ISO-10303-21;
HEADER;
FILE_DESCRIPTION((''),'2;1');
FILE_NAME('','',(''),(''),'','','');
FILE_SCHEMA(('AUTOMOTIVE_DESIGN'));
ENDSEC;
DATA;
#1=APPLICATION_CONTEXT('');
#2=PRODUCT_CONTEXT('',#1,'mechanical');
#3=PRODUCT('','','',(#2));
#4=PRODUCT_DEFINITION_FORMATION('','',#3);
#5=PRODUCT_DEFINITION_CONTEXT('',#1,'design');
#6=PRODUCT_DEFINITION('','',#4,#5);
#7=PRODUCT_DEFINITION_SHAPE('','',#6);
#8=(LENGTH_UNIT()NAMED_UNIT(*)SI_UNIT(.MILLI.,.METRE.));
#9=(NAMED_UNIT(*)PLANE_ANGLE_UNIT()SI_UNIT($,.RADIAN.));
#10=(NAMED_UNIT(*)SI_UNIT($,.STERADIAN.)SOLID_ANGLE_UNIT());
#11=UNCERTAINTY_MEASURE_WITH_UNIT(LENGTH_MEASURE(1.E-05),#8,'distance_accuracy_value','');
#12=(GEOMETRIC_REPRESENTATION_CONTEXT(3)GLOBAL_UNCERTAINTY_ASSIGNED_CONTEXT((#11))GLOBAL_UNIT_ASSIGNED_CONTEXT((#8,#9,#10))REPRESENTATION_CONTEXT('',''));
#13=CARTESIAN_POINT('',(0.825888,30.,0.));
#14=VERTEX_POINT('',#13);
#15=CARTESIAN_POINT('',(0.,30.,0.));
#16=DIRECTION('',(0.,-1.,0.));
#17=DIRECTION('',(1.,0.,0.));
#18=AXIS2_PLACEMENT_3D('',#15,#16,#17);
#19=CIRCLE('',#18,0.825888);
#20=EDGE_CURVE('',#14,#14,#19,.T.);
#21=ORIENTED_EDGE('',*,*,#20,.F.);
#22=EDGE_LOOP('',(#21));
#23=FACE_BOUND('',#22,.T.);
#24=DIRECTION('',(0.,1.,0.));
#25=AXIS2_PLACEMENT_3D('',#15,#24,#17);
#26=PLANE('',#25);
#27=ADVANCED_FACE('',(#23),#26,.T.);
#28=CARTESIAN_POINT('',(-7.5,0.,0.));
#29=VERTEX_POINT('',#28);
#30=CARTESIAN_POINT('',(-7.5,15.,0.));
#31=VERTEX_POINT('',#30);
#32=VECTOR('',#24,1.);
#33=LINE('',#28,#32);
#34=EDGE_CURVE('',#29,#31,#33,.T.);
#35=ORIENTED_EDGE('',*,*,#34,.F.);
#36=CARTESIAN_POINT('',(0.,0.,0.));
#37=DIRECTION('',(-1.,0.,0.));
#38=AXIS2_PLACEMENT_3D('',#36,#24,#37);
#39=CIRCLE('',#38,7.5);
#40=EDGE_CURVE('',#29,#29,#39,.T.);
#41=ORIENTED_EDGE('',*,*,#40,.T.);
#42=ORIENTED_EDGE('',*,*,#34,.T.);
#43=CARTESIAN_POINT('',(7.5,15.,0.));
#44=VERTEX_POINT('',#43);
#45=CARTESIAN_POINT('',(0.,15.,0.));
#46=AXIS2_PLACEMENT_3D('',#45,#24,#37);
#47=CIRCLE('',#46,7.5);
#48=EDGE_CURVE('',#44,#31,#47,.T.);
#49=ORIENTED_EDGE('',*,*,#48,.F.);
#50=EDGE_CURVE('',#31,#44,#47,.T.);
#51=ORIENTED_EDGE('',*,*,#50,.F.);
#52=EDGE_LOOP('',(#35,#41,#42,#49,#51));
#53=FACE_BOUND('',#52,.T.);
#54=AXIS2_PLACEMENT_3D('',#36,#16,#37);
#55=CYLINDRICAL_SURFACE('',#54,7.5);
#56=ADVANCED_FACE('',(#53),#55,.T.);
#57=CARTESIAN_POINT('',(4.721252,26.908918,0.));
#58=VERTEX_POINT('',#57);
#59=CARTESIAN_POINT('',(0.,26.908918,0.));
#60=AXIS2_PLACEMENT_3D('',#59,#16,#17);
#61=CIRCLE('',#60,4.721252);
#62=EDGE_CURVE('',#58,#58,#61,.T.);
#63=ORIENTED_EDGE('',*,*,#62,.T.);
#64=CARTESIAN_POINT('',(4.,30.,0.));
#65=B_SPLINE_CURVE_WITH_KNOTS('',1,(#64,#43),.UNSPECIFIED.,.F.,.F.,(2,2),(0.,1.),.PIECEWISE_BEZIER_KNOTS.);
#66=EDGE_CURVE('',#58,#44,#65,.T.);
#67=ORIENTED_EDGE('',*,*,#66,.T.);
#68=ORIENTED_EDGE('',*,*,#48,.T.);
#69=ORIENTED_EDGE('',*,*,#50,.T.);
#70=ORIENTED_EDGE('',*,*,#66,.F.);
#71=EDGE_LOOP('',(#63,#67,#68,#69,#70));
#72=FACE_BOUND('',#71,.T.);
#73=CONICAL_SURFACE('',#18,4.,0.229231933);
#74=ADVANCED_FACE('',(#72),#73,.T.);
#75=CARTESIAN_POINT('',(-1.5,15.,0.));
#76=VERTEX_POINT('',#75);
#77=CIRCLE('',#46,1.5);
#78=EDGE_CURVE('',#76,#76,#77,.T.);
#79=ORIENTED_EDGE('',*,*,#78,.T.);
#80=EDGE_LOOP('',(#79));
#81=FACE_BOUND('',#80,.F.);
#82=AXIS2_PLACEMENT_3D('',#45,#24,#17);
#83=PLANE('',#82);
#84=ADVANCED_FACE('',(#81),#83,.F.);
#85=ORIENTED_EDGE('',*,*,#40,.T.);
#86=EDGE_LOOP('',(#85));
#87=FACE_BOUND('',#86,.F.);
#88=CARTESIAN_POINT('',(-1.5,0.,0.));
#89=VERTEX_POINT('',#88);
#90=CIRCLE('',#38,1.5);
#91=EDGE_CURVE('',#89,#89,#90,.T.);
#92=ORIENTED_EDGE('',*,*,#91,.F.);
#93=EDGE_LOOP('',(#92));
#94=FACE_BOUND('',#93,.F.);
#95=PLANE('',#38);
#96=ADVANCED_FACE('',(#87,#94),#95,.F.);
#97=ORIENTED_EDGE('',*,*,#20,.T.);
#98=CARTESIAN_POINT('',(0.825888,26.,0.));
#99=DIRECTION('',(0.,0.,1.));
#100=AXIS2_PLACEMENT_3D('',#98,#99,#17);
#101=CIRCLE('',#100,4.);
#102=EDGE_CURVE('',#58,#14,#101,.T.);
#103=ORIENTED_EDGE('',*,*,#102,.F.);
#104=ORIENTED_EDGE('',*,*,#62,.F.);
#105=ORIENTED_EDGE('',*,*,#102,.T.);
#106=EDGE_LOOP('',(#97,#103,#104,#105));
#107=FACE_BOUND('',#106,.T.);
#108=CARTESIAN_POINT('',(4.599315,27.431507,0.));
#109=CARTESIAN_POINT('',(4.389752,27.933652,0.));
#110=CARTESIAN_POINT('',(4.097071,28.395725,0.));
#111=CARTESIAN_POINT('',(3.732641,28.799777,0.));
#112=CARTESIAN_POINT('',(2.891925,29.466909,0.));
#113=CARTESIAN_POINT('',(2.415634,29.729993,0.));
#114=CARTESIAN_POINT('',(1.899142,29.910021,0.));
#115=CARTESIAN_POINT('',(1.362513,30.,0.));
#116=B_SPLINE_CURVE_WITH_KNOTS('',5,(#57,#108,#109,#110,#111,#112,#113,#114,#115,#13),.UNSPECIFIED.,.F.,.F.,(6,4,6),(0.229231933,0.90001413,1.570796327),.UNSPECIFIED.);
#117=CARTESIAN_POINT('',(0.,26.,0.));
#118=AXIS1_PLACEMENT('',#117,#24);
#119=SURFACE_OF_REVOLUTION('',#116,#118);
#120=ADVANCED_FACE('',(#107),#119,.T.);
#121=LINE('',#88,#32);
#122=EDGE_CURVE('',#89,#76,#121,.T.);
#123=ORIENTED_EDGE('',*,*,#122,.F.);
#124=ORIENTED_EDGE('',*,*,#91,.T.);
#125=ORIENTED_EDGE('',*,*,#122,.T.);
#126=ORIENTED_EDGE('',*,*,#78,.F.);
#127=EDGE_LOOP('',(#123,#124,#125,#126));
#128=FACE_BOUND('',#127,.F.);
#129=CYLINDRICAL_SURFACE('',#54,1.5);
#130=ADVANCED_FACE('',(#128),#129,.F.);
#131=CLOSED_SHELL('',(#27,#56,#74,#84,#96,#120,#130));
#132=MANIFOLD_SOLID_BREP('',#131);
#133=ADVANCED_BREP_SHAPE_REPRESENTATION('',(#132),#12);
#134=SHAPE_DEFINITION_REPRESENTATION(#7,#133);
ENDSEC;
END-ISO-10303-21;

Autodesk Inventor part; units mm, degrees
ref_plane "YZ Plane" through (0, 0, 0) normal (1, 0, 0) x (0, 1, 0)
ref_plane "XZ Plane" through (0, 0, 0) normal (0, 1, 0) x (-1, 0, 0)
ref_plane "XY Plane" through (0, 0, 0) normal (0, 0, 1) x (1, 0, 0)
sketch "Sketch1" plane through (0, 0, 0) normal (0, 1, 0) x (-1, 0, 0)
  circle A0 centre (0, 0) radius 7.5
  circle A1 centre (0, 0) radius 1.5
  dimension "d0" = 15
  dimension "d1" = 3
extrude "Extrusion1" add sketch "Sketch1" along normal blind 15
thread "Thread1" size "M3x0.5" class "6H" standard "ANSI Metric M Profile" full length
sketch "Sketch2" plane through (0, 15, 0) normal (0, 1, 0) x (1, 0, 0)
  circle A0 centre (0, 0) radius 4
  dimension "d6" = 8
extrude "Extrusion2" add sketch "Sketch2" along normal blind 15
loft "Loft1" add section 1 edges at (-4, 30, 0) section 2 edges at (7.5, 15, 0)
fillet "Fillet1" radius 4 1 edges at (-4, 30, 0)
properties part number "pull"
